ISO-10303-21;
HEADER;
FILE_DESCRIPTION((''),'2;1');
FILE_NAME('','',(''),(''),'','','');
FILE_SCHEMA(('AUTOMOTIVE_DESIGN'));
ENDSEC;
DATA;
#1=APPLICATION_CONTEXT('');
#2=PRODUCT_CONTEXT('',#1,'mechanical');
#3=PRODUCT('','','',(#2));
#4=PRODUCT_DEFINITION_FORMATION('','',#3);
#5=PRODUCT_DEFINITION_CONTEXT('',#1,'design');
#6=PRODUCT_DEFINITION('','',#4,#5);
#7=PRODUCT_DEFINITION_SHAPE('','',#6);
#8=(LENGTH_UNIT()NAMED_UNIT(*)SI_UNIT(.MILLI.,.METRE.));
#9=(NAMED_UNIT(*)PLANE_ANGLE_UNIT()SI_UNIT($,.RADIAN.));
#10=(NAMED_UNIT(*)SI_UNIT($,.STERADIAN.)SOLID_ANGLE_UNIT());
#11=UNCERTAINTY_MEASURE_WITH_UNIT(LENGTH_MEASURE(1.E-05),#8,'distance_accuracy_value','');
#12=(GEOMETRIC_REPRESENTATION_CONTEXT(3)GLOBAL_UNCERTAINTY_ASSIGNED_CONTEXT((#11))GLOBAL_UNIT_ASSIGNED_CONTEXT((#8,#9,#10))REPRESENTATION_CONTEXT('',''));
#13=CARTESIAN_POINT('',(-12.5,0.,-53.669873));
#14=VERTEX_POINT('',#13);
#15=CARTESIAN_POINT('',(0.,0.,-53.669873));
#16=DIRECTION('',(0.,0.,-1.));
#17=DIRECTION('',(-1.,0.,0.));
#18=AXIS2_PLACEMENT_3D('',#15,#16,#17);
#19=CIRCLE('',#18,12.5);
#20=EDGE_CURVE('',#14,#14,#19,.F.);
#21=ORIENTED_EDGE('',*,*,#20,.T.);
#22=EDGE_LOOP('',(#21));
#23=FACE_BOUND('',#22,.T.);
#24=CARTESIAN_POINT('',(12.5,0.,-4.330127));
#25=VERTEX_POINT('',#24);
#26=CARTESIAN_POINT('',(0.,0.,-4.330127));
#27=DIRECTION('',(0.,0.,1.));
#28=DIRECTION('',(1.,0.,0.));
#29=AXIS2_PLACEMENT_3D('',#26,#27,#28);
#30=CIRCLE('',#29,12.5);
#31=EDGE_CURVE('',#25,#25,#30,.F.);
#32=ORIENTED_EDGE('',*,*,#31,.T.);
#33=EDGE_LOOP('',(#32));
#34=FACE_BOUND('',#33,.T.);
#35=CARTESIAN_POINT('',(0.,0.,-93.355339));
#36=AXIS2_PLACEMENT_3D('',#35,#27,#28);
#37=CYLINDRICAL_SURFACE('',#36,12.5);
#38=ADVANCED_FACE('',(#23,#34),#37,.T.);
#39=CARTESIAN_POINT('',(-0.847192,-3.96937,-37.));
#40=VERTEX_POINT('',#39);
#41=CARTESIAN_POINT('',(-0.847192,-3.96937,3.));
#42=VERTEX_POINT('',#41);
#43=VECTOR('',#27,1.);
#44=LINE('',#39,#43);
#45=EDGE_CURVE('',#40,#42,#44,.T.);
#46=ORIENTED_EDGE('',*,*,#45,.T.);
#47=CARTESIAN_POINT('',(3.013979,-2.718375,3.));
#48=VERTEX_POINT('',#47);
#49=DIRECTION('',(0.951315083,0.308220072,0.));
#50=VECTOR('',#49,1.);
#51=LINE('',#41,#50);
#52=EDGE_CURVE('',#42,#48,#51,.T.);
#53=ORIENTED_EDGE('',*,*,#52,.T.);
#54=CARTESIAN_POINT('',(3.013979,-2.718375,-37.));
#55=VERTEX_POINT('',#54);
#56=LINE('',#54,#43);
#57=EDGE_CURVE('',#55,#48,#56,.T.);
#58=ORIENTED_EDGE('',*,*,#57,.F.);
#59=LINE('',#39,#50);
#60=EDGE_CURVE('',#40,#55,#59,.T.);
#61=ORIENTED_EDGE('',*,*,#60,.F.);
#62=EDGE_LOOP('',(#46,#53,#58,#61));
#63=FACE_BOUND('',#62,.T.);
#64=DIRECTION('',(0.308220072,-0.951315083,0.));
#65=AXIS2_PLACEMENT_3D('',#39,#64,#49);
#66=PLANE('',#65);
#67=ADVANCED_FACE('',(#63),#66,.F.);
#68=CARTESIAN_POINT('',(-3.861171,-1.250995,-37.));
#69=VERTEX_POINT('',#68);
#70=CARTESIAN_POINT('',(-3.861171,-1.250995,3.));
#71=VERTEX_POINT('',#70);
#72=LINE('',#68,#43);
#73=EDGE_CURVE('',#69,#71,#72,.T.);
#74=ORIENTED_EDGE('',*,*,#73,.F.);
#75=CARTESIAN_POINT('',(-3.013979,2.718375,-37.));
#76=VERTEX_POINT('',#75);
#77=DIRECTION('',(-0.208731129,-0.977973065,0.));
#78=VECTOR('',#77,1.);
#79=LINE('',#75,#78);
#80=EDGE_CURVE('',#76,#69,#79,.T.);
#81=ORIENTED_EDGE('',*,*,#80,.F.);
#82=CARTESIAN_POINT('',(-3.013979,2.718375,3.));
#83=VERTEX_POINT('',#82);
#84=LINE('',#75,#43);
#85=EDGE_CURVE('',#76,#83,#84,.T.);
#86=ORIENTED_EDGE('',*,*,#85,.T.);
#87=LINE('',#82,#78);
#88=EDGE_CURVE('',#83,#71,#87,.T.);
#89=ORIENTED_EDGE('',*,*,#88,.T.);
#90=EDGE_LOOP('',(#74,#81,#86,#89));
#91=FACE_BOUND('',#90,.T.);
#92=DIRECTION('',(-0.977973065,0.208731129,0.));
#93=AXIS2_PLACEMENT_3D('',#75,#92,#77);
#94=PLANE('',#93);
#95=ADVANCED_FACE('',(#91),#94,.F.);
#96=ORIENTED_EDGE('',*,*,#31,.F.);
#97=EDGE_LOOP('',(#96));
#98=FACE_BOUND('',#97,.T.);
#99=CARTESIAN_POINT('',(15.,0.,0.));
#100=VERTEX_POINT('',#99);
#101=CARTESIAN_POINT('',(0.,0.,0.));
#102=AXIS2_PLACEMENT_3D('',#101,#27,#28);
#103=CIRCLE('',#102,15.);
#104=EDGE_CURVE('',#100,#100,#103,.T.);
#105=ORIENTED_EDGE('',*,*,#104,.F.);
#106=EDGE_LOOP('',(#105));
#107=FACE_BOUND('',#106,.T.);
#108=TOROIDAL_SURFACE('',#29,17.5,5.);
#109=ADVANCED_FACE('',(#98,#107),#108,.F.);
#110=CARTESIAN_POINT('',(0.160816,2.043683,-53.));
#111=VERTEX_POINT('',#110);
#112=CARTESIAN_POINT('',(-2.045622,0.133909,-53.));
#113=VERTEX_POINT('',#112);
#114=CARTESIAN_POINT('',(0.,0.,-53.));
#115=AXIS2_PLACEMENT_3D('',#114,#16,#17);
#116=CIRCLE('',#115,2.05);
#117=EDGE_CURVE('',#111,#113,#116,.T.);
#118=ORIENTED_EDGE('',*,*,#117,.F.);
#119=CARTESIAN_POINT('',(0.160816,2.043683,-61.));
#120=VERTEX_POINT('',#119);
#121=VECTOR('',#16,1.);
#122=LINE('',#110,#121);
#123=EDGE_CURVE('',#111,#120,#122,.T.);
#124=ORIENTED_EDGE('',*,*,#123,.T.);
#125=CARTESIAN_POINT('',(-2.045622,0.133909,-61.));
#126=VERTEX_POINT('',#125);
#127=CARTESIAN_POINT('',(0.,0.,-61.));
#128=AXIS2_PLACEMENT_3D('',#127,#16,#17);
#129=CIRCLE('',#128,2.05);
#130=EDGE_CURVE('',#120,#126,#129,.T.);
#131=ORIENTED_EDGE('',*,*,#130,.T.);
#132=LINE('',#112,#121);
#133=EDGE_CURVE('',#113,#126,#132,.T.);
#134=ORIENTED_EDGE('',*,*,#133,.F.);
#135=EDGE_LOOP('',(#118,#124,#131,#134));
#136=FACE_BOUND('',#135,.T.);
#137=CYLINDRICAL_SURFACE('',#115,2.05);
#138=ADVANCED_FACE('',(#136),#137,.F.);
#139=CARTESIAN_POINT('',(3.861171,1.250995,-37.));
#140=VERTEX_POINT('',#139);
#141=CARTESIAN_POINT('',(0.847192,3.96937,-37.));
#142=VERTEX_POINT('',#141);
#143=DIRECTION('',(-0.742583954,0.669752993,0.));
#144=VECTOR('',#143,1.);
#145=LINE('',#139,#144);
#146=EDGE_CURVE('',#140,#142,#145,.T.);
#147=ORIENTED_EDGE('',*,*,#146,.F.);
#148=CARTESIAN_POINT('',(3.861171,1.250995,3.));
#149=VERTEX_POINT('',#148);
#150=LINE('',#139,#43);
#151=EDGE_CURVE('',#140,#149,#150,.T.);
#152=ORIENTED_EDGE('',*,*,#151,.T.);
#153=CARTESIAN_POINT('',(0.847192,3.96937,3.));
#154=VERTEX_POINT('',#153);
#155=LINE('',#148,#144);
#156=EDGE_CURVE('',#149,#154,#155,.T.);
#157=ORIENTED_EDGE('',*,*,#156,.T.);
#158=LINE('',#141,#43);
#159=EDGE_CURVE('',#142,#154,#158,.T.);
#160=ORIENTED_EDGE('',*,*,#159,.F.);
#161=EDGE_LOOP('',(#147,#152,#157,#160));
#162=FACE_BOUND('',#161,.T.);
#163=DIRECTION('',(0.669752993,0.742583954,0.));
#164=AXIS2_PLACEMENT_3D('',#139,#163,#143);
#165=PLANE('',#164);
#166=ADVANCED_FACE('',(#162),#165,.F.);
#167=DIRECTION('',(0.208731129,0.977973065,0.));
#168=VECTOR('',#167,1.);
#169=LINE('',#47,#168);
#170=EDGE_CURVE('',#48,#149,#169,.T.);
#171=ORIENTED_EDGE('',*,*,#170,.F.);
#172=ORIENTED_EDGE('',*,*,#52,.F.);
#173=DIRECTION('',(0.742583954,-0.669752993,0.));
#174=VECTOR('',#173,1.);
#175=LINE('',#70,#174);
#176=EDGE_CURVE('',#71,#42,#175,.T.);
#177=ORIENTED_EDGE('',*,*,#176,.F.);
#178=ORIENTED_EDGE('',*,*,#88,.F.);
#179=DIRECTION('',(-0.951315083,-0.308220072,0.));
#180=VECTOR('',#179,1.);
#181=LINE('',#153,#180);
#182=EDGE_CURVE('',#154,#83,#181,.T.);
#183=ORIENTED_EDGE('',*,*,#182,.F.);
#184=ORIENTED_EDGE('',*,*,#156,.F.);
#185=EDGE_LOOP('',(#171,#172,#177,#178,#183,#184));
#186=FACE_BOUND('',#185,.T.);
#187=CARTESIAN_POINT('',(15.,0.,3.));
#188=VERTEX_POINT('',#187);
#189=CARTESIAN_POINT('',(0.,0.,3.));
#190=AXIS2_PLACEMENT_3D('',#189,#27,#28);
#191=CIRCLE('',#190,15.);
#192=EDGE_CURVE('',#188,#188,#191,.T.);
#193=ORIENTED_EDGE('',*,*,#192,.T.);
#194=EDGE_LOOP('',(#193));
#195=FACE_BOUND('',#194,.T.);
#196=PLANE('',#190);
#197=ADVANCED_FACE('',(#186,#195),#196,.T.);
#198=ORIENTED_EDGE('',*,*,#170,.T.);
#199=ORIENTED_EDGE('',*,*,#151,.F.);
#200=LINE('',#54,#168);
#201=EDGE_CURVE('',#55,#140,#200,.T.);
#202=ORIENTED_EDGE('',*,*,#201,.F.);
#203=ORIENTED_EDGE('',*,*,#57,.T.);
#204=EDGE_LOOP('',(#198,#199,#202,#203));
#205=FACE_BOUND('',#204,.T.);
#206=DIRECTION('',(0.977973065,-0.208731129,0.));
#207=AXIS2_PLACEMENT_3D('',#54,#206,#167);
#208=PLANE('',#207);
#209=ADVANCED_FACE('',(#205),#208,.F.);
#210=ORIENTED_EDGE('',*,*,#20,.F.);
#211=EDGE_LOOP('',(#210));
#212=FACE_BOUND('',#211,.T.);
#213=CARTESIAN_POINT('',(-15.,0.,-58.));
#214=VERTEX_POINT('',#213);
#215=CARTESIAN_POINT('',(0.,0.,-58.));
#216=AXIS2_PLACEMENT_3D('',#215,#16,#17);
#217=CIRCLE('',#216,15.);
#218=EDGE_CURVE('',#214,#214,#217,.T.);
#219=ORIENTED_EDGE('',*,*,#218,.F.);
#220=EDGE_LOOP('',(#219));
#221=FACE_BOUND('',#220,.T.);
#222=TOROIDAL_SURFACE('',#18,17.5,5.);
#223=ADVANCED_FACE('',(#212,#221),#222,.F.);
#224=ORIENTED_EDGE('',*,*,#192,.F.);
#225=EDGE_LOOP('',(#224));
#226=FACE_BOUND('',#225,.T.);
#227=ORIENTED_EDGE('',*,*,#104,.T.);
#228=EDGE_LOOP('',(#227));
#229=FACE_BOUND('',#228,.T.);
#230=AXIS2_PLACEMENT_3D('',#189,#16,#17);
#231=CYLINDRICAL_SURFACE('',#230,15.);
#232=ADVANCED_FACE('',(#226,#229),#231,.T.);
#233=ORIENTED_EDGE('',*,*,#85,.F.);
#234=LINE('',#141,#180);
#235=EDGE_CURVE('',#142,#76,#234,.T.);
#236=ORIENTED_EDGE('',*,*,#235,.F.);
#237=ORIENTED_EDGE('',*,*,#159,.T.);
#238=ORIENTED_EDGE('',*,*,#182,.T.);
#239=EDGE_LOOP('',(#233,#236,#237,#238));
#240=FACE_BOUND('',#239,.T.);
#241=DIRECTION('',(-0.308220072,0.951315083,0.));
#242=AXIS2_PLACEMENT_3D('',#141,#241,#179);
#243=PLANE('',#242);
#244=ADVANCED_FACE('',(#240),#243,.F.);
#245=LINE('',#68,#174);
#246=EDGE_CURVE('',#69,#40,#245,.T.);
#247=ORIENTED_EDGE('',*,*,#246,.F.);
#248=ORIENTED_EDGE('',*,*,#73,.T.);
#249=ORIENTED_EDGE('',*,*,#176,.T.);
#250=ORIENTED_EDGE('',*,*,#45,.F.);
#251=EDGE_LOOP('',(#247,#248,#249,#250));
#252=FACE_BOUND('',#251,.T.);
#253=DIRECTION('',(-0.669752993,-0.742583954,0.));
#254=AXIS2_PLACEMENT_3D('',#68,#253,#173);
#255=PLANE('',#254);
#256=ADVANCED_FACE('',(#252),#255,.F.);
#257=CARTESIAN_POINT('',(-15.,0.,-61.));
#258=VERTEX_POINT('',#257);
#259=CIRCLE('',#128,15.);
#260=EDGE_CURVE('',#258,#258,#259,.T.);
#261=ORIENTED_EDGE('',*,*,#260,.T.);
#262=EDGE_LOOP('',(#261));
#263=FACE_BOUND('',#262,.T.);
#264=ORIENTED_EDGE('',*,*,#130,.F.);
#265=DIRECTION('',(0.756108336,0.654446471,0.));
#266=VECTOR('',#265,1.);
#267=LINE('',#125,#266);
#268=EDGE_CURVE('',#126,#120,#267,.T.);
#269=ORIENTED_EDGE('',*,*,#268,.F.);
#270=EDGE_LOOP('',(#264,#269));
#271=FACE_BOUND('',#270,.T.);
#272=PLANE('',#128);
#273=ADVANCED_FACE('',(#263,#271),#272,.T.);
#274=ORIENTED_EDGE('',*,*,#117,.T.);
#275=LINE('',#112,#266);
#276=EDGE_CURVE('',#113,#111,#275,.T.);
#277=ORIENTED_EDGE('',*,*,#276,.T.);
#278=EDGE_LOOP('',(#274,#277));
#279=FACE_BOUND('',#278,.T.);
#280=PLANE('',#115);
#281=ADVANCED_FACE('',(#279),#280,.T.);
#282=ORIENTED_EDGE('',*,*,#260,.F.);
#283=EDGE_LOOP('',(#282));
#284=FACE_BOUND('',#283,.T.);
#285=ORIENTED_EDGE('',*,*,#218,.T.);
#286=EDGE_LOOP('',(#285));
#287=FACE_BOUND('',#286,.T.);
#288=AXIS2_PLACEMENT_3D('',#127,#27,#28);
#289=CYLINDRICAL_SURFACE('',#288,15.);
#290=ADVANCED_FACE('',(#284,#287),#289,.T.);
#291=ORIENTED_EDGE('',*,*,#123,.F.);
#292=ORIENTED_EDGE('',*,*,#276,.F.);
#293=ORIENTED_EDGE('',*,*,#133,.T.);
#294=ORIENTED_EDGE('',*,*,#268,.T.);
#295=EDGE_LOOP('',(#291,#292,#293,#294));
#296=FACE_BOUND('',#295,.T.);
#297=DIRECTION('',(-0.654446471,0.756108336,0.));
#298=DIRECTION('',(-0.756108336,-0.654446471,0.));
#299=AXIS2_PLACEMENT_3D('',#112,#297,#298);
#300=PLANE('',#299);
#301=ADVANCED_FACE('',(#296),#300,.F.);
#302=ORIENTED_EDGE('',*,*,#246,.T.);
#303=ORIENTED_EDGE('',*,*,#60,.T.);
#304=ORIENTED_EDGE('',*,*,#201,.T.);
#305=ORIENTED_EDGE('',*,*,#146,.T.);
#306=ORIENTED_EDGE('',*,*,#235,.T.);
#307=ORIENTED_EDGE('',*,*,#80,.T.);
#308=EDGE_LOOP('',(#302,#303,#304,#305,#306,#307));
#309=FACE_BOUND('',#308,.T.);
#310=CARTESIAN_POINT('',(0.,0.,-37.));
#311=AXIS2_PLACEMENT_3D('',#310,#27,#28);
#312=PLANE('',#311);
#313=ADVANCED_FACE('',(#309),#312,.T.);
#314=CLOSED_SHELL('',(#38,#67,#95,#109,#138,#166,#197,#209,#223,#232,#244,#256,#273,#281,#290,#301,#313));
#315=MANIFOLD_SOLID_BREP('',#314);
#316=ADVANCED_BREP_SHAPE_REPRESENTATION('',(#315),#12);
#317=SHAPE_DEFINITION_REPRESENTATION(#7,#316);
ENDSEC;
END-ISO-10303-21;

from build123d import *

# Parameters (mm, degrees)
CROQUIS1_R              = 15
SALIENTE_EXTRUIR1_DEPTH = 3
CROQUIS3_R              = 9
SALIENTE_EXTRUIR3_DEPTH = 58
SALIENTE_EXTRUIR4_START = 3
CROQUIS4_R              = 15
SALIENTE_EXTRUIR4_DEPTH = 3
CORTAR_EXTRUIR1_DEPTH   = 8
CROQUIS8_R              = 12.5
CROQUIS8_R_2            = 9
SALIENTE_EXTRUIR7_DEPTH = 58
REDONDEO3_R             = 5
CORTAR_EXTRUIR2_DEPTH   = 40


with BuildPart() as part:
    # Croquis1 → Saliente-Extruir1 (new body)
    with BuildSketch(Plane.XY):
        Circle(CROQUIS1_R)
    extrude(amount=SALIENTE_EXTRUIR1_DEPTH)

    # Croquis3 → Saliente-Extruir3 (add)
    with BuildSketch(Plane(origin=(0, 0, 0), x_dir=(-1, 0, 0), z_dir=(0, 0, -1))):
        with Locations(Location((0, 0, 0), (0, 0, 180))):
            Circle(CROQUIS3_R)
    extrude(amount=SALIENTE_EXTRUIR3_DEPTH)

    # Croquis4 → Saliente-Extruir4 (add)
    with BuildSketch(Plane(origin=(0, 0, -58), x_dir=(-1, 0, 0), z_dir=(0, 0, -1)).offset(SALIENTE_EXTRUIR4_START)):
        with Locations(Location((0, 0, 0), (0, 0, 180))):
            Circle(CROQUIS4_R)
    extrude(amount=-SALIENTE_EXTRUIR4_DEPTH)

    # Croquis5 → Cortar-Extruir1 (cut)
    with BuildSketch(Plane(origin=(0, 0, -61), x_dir=(-1, 0, 0), z_dir=(0, 0, -1))):
        with BuildLine():
            Line((2.045621727, 0.133909486), (-0.160815889, 2.043682522))
            ThreePointArc((-0.160815889, 2.043682522), (-1.341615267, -1.550022089), (2.045621727, 0.133909486))
        make_face()
    extrude(amount=-CORTAR_EXTRUIR1_DEPTH, mode=Mode.SUBTRACT)

    # Croquis8 → Saliente-Extruir7 (add)
    with BuildSketch(Plane(origin=(0, 0, 0), x_dir=(-1, 0, 0), z_dir=(0, 0, -1))):
        with Locations(Location((0, 0, 0), (0, 0, 180))):
            Circle(CROQUIS8_R)
        Circle(CROQUIS8_R_2, mode=Mode.SUBTRACT)
    extrude(amount=SALIENTE_EXTRUIR7_DEPTH)

    # Redondeo3
    # the kernel refuses this fillet: 5 mm, written as the material it adds along each edge
    with BuildSketch(Plane(origin=(0, 0, -58), x_dir=(1, 0, 0), z_dir=(0, 1, 0))) as redondeo3_piece_1:
        with BuildLine():
            CenterArc((17.5, -4.330127019), REDONDEO3_R, 120, 60)
            Line((12.5, -4.330127019), (12.4, -4.330127019))
            Line((12.4, -4.330127019), (12.4, 0))
            Line((12.4, 0), (12.5, 0.1))
            ThreePointArc((12.5, 0.1), (13.75, 0.1), (14.95, 0.08660254))
            Line((14.95, 0.08660254), (15, 0))
        make_face()
    revolve(axis=Axis((0, 0, -58), (0, 0, -1)))
    with BuildSketch(Plane(origin=(0, 0, 0), x_dir=(1, 0, 0), z_dir=(0, 1, 0))) as redondeo3_piece_2:
        with BuildLine():
            CenterArc((17.5, 4.330127019), REDONDEO3_R, 180, 60)
            Line((15, 0), (14.95, -0.08660254))
            ThreePointArc((14.95, -0.08660254), (13.75, -0.1), (12.5, -0.1))
            Line((12.5, -0.1), (12.4, 0))
            Line((12.4, 0), (12.4, 4.330127019))
            Line((12.4, 4.330127019), (12.5, 4.330127019))
        make_face()
    revolve(axis=Axis((0, 0, 0), (0, 0, -1)))

    # Croquis2 → Cortar-Extruir2 (cut)
    with BuildSketch(Plane.XY.offset(3)):
        Polygon((3.013979252, -2.718374956), (3.861171395, 1.250995121), (0.847192143, 3.969370077), (-3.013979252, 2.718374956), (-3.861171395, -1.250995121), (-0.847192143, -3.969370077), align=None)
    extrude(amount=-CORTAR_EXTRUIR2_DEPTH, mode=Mode.SUBTRACT)


solid = part.part
